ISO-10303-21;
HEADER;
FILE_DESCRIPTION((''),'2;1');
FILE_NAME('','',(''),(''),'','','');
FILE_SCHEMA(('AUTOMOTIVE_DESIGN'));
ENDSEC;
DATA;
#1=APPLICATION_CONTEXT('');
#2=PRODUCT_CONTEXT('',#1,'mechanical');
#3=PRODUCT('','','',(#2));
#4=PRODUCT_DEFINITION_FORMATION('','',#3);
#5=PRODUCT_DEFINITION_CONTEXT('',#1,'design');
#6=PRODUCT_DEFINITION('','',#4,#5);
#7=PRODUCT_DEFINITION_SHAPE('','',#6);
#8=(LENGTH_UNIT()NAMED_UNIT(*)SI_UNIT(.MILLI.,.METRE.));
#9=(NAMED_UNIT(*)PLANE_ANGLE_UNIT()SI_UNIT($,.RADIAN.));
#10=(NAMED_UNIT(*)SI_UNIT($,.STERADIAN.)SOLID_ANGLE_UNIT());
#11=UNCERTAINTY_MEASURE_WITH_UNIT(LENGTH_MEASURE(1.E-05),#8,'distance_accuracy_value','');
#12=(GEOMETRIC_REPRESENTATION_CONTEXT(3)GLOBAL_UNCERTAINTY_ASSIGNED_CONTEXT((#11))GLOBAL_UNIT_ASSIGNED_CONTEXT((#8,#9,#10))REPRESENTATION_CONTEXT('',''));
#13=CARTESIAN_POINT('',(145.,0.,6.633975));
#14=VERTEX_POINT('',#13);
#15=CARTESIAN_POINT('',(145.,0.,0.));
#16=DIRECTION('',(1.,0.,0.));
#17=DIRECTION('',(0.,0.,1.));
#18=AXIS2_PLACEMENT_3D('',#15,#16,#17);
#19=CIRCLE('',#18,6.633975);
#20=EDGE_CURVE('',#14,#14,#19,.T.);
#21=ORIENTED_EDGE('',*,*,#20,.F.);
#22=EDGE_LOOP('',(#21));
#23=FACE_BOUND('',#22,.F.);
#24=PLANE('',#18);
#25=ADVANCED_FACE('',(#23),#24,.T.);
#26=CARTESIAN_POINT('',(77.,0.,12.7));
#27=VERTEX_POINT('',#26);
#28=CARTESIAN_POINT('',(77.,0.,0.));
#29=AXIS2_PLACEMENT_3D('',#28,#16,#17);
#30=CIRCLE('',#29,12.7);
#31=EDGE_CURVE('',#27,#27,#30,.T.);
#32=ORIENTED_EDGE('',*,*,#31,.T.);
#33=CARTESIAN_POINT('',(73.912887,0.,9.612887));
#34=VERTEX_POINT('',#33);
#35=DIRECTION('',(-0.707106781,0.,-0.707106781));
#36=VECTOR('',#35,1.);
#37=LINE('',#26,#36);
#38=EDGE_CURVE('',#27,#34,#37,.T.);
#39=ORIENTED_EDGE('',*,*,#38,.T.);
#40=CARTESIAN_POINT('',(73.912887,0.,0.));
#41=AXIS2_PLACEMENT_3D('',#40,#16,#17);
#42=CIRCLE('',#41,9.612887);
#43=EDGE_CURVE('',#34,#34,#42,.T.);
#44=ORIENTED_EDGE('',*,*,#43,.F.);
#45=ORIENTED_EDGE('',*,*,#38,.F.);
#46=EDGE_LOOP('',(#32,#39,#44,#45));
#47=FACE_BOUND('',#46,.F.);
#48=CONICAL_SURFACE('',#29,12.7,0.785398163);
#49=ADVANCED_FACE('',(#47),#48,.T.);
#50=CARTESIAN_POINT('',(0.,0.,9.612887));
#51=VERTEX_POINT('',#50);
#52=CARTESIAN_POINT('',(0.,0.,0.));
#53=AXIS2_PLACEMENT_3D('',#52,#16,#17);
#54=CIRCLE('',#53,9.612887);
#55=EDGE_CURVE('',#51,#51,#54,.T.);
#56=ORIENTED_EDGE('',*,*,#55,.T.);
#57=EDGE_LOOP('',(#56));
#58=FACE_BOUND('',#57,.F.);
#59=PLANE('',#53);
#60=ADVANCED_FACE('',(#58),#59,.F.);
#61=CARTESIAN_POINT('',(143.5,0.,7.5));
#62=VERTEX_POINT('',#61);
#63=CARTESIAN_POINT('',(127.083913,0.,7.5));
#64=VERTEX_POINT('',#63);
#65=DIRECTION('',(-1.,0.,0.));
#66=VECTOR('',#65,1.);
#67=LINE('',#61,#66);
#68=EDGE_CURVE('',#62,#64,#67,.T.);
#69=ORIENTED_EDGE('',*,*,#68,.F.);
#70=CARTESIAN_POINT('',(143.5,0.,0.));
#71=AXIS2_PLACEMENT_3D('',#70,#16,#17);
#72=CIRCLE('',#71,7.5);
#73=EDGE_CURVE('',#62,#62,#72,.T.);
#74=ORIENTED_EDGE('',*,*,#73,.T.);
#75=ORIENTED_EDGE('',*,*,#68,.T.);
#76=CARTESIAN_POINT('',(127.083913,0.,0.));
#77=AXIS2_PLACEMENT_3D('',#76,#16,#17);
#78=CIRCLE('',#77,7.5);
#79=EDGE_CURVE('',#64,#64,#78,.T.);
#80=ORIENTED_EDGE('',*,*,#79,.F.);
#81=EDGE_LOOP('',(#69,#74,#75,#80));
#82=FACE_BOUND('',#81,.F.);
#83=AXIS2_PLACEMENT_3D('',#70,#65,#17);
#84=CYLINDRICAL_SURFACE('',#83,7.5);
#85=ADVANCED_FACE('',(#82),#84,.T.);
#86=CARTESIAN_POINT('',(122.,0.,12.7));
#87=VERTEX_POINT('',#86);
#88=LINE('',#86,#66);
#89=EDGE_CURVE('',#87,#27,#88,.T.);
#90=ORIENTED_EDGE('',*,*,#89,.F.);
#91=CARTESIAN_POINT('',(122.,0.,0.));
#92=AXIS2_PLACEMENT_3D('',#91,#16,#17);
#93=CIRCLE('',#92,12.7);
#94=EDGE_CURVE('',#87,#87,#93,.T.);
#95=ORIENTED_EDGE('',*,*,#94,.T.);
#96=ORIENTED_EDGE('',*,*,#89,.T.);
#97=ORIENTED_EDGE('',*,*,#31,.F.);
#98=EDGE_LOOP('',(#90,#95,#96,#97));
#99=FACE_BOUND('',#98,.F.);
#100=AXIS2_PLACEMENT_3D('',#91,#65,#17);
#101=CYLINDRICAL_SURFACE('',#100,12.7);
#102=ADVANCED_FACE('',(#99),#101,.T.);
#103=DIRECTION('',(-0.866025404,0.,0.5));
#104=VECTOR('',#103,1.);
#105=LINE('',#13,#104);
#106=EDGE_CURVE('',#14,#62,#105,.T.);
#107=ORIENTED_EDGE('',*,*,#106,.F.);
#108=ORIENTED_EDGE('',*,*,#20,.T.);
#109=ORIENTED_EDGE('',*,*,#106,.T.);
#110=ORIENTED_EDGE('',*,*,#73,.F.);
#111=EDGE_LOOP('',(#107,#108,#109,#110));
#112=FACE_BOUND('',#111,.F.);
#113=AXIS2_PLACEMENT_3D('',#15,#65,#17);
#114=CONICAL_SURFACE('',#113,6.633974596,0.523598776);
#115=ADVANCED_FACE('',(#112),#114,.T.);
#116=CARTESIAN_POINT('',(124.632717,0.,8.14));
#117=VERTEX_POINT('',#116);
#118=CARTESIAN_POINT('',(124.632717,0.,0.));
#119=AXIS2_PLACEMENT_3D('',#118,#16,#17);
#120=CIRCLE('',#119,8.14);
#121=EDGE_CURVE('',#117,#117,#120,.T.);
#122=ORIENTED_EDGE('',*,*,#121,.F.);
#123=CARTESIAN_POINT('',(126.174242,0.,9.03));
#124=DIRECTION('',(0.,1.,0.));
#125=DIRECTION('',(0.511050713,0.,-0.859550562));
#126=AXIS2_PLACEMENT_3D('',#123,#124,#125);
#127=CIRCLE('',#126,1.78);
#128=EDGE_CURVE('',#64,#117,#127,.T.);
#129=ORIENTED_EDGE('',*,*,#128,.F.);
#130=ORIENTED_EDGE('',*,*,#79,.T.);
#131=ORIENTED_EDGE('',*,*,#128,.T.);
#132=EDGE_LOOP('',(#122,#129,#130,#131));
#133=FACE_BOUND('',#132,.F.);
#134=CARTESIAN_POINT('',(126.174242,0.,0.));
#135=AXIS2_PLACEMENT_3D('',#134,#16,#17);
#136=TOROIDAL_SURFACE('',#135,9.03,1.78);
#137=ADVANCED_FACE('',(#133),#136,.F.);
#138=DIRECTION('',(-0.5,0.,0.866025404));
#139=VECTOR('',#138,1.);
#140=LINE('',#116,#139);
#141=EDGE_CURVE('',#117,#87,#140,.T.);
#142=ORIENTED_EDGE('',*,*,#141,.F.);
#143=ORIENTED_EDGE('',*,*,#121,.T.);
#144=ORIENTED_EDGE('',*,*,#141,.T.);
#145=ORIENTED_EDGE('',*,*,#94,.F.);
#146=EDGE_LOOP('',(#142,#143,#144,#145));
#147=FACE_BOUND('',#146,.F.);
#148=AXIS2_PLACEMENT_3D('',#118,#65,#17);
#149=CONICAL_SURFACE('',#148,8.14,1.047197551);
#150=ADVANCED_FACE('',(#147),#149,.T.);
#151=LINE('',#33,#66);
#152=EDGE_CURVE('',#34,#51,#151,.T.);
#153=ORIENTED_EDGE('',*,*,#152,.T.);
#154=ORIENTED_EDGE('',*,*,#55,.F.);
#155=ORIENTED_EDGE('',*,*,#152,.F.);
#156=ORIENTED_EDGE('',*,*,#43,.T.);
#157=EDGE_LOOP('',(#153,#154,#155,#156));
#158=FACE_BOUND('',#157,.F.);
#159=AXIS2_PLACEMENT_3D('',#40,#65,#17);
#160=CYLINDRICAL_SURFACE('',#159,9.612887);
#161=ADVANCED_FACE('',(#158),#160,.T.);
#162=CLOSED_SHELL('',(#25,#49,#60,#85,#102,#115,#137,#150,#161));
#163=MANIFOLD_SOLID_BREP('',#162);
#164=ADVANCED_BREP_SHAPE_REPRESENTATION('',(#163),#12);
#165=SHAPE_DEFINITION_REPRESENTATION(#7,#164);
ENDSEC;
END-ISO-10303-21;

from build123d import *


# Not quite as in the source:
# - a feature names something its author has since deleted; it is built from what else it names


with BuildPart() as f1:
    # F0 (on Front) → F1 (revolve)
    with BuildSketch(Plane.XZ):
        with BuildLine():
            Line((73.9128874429, 9.6128874429), (0, 9.6128874429))
            Line((0, 9.6128874429), (0, 0))
            Line((0, 0), (145, 0))
            Line((145, 0), (145, 6.6339745962))
            Line((145, 6.6339745962), (143.5, 7.5))
            Line((143.5, 7.5), (127.0839127162, 7.5))
            ThreePointArc((127.0839127162, 7.5), (125.7245645959, 7.307737003), (124.6327172275, 8.14))
            Line((124.6327172275, 8.14), (122, 12.7))
            Line((122, 12.7), (77, 12.7))
            Line((77, 12.7), (73.9128874429, 9.6128874429))
        make_face()
    revolve(axis=Axis((72.5, 0, 0), (1, 0, 0)))


solid = f1.part
